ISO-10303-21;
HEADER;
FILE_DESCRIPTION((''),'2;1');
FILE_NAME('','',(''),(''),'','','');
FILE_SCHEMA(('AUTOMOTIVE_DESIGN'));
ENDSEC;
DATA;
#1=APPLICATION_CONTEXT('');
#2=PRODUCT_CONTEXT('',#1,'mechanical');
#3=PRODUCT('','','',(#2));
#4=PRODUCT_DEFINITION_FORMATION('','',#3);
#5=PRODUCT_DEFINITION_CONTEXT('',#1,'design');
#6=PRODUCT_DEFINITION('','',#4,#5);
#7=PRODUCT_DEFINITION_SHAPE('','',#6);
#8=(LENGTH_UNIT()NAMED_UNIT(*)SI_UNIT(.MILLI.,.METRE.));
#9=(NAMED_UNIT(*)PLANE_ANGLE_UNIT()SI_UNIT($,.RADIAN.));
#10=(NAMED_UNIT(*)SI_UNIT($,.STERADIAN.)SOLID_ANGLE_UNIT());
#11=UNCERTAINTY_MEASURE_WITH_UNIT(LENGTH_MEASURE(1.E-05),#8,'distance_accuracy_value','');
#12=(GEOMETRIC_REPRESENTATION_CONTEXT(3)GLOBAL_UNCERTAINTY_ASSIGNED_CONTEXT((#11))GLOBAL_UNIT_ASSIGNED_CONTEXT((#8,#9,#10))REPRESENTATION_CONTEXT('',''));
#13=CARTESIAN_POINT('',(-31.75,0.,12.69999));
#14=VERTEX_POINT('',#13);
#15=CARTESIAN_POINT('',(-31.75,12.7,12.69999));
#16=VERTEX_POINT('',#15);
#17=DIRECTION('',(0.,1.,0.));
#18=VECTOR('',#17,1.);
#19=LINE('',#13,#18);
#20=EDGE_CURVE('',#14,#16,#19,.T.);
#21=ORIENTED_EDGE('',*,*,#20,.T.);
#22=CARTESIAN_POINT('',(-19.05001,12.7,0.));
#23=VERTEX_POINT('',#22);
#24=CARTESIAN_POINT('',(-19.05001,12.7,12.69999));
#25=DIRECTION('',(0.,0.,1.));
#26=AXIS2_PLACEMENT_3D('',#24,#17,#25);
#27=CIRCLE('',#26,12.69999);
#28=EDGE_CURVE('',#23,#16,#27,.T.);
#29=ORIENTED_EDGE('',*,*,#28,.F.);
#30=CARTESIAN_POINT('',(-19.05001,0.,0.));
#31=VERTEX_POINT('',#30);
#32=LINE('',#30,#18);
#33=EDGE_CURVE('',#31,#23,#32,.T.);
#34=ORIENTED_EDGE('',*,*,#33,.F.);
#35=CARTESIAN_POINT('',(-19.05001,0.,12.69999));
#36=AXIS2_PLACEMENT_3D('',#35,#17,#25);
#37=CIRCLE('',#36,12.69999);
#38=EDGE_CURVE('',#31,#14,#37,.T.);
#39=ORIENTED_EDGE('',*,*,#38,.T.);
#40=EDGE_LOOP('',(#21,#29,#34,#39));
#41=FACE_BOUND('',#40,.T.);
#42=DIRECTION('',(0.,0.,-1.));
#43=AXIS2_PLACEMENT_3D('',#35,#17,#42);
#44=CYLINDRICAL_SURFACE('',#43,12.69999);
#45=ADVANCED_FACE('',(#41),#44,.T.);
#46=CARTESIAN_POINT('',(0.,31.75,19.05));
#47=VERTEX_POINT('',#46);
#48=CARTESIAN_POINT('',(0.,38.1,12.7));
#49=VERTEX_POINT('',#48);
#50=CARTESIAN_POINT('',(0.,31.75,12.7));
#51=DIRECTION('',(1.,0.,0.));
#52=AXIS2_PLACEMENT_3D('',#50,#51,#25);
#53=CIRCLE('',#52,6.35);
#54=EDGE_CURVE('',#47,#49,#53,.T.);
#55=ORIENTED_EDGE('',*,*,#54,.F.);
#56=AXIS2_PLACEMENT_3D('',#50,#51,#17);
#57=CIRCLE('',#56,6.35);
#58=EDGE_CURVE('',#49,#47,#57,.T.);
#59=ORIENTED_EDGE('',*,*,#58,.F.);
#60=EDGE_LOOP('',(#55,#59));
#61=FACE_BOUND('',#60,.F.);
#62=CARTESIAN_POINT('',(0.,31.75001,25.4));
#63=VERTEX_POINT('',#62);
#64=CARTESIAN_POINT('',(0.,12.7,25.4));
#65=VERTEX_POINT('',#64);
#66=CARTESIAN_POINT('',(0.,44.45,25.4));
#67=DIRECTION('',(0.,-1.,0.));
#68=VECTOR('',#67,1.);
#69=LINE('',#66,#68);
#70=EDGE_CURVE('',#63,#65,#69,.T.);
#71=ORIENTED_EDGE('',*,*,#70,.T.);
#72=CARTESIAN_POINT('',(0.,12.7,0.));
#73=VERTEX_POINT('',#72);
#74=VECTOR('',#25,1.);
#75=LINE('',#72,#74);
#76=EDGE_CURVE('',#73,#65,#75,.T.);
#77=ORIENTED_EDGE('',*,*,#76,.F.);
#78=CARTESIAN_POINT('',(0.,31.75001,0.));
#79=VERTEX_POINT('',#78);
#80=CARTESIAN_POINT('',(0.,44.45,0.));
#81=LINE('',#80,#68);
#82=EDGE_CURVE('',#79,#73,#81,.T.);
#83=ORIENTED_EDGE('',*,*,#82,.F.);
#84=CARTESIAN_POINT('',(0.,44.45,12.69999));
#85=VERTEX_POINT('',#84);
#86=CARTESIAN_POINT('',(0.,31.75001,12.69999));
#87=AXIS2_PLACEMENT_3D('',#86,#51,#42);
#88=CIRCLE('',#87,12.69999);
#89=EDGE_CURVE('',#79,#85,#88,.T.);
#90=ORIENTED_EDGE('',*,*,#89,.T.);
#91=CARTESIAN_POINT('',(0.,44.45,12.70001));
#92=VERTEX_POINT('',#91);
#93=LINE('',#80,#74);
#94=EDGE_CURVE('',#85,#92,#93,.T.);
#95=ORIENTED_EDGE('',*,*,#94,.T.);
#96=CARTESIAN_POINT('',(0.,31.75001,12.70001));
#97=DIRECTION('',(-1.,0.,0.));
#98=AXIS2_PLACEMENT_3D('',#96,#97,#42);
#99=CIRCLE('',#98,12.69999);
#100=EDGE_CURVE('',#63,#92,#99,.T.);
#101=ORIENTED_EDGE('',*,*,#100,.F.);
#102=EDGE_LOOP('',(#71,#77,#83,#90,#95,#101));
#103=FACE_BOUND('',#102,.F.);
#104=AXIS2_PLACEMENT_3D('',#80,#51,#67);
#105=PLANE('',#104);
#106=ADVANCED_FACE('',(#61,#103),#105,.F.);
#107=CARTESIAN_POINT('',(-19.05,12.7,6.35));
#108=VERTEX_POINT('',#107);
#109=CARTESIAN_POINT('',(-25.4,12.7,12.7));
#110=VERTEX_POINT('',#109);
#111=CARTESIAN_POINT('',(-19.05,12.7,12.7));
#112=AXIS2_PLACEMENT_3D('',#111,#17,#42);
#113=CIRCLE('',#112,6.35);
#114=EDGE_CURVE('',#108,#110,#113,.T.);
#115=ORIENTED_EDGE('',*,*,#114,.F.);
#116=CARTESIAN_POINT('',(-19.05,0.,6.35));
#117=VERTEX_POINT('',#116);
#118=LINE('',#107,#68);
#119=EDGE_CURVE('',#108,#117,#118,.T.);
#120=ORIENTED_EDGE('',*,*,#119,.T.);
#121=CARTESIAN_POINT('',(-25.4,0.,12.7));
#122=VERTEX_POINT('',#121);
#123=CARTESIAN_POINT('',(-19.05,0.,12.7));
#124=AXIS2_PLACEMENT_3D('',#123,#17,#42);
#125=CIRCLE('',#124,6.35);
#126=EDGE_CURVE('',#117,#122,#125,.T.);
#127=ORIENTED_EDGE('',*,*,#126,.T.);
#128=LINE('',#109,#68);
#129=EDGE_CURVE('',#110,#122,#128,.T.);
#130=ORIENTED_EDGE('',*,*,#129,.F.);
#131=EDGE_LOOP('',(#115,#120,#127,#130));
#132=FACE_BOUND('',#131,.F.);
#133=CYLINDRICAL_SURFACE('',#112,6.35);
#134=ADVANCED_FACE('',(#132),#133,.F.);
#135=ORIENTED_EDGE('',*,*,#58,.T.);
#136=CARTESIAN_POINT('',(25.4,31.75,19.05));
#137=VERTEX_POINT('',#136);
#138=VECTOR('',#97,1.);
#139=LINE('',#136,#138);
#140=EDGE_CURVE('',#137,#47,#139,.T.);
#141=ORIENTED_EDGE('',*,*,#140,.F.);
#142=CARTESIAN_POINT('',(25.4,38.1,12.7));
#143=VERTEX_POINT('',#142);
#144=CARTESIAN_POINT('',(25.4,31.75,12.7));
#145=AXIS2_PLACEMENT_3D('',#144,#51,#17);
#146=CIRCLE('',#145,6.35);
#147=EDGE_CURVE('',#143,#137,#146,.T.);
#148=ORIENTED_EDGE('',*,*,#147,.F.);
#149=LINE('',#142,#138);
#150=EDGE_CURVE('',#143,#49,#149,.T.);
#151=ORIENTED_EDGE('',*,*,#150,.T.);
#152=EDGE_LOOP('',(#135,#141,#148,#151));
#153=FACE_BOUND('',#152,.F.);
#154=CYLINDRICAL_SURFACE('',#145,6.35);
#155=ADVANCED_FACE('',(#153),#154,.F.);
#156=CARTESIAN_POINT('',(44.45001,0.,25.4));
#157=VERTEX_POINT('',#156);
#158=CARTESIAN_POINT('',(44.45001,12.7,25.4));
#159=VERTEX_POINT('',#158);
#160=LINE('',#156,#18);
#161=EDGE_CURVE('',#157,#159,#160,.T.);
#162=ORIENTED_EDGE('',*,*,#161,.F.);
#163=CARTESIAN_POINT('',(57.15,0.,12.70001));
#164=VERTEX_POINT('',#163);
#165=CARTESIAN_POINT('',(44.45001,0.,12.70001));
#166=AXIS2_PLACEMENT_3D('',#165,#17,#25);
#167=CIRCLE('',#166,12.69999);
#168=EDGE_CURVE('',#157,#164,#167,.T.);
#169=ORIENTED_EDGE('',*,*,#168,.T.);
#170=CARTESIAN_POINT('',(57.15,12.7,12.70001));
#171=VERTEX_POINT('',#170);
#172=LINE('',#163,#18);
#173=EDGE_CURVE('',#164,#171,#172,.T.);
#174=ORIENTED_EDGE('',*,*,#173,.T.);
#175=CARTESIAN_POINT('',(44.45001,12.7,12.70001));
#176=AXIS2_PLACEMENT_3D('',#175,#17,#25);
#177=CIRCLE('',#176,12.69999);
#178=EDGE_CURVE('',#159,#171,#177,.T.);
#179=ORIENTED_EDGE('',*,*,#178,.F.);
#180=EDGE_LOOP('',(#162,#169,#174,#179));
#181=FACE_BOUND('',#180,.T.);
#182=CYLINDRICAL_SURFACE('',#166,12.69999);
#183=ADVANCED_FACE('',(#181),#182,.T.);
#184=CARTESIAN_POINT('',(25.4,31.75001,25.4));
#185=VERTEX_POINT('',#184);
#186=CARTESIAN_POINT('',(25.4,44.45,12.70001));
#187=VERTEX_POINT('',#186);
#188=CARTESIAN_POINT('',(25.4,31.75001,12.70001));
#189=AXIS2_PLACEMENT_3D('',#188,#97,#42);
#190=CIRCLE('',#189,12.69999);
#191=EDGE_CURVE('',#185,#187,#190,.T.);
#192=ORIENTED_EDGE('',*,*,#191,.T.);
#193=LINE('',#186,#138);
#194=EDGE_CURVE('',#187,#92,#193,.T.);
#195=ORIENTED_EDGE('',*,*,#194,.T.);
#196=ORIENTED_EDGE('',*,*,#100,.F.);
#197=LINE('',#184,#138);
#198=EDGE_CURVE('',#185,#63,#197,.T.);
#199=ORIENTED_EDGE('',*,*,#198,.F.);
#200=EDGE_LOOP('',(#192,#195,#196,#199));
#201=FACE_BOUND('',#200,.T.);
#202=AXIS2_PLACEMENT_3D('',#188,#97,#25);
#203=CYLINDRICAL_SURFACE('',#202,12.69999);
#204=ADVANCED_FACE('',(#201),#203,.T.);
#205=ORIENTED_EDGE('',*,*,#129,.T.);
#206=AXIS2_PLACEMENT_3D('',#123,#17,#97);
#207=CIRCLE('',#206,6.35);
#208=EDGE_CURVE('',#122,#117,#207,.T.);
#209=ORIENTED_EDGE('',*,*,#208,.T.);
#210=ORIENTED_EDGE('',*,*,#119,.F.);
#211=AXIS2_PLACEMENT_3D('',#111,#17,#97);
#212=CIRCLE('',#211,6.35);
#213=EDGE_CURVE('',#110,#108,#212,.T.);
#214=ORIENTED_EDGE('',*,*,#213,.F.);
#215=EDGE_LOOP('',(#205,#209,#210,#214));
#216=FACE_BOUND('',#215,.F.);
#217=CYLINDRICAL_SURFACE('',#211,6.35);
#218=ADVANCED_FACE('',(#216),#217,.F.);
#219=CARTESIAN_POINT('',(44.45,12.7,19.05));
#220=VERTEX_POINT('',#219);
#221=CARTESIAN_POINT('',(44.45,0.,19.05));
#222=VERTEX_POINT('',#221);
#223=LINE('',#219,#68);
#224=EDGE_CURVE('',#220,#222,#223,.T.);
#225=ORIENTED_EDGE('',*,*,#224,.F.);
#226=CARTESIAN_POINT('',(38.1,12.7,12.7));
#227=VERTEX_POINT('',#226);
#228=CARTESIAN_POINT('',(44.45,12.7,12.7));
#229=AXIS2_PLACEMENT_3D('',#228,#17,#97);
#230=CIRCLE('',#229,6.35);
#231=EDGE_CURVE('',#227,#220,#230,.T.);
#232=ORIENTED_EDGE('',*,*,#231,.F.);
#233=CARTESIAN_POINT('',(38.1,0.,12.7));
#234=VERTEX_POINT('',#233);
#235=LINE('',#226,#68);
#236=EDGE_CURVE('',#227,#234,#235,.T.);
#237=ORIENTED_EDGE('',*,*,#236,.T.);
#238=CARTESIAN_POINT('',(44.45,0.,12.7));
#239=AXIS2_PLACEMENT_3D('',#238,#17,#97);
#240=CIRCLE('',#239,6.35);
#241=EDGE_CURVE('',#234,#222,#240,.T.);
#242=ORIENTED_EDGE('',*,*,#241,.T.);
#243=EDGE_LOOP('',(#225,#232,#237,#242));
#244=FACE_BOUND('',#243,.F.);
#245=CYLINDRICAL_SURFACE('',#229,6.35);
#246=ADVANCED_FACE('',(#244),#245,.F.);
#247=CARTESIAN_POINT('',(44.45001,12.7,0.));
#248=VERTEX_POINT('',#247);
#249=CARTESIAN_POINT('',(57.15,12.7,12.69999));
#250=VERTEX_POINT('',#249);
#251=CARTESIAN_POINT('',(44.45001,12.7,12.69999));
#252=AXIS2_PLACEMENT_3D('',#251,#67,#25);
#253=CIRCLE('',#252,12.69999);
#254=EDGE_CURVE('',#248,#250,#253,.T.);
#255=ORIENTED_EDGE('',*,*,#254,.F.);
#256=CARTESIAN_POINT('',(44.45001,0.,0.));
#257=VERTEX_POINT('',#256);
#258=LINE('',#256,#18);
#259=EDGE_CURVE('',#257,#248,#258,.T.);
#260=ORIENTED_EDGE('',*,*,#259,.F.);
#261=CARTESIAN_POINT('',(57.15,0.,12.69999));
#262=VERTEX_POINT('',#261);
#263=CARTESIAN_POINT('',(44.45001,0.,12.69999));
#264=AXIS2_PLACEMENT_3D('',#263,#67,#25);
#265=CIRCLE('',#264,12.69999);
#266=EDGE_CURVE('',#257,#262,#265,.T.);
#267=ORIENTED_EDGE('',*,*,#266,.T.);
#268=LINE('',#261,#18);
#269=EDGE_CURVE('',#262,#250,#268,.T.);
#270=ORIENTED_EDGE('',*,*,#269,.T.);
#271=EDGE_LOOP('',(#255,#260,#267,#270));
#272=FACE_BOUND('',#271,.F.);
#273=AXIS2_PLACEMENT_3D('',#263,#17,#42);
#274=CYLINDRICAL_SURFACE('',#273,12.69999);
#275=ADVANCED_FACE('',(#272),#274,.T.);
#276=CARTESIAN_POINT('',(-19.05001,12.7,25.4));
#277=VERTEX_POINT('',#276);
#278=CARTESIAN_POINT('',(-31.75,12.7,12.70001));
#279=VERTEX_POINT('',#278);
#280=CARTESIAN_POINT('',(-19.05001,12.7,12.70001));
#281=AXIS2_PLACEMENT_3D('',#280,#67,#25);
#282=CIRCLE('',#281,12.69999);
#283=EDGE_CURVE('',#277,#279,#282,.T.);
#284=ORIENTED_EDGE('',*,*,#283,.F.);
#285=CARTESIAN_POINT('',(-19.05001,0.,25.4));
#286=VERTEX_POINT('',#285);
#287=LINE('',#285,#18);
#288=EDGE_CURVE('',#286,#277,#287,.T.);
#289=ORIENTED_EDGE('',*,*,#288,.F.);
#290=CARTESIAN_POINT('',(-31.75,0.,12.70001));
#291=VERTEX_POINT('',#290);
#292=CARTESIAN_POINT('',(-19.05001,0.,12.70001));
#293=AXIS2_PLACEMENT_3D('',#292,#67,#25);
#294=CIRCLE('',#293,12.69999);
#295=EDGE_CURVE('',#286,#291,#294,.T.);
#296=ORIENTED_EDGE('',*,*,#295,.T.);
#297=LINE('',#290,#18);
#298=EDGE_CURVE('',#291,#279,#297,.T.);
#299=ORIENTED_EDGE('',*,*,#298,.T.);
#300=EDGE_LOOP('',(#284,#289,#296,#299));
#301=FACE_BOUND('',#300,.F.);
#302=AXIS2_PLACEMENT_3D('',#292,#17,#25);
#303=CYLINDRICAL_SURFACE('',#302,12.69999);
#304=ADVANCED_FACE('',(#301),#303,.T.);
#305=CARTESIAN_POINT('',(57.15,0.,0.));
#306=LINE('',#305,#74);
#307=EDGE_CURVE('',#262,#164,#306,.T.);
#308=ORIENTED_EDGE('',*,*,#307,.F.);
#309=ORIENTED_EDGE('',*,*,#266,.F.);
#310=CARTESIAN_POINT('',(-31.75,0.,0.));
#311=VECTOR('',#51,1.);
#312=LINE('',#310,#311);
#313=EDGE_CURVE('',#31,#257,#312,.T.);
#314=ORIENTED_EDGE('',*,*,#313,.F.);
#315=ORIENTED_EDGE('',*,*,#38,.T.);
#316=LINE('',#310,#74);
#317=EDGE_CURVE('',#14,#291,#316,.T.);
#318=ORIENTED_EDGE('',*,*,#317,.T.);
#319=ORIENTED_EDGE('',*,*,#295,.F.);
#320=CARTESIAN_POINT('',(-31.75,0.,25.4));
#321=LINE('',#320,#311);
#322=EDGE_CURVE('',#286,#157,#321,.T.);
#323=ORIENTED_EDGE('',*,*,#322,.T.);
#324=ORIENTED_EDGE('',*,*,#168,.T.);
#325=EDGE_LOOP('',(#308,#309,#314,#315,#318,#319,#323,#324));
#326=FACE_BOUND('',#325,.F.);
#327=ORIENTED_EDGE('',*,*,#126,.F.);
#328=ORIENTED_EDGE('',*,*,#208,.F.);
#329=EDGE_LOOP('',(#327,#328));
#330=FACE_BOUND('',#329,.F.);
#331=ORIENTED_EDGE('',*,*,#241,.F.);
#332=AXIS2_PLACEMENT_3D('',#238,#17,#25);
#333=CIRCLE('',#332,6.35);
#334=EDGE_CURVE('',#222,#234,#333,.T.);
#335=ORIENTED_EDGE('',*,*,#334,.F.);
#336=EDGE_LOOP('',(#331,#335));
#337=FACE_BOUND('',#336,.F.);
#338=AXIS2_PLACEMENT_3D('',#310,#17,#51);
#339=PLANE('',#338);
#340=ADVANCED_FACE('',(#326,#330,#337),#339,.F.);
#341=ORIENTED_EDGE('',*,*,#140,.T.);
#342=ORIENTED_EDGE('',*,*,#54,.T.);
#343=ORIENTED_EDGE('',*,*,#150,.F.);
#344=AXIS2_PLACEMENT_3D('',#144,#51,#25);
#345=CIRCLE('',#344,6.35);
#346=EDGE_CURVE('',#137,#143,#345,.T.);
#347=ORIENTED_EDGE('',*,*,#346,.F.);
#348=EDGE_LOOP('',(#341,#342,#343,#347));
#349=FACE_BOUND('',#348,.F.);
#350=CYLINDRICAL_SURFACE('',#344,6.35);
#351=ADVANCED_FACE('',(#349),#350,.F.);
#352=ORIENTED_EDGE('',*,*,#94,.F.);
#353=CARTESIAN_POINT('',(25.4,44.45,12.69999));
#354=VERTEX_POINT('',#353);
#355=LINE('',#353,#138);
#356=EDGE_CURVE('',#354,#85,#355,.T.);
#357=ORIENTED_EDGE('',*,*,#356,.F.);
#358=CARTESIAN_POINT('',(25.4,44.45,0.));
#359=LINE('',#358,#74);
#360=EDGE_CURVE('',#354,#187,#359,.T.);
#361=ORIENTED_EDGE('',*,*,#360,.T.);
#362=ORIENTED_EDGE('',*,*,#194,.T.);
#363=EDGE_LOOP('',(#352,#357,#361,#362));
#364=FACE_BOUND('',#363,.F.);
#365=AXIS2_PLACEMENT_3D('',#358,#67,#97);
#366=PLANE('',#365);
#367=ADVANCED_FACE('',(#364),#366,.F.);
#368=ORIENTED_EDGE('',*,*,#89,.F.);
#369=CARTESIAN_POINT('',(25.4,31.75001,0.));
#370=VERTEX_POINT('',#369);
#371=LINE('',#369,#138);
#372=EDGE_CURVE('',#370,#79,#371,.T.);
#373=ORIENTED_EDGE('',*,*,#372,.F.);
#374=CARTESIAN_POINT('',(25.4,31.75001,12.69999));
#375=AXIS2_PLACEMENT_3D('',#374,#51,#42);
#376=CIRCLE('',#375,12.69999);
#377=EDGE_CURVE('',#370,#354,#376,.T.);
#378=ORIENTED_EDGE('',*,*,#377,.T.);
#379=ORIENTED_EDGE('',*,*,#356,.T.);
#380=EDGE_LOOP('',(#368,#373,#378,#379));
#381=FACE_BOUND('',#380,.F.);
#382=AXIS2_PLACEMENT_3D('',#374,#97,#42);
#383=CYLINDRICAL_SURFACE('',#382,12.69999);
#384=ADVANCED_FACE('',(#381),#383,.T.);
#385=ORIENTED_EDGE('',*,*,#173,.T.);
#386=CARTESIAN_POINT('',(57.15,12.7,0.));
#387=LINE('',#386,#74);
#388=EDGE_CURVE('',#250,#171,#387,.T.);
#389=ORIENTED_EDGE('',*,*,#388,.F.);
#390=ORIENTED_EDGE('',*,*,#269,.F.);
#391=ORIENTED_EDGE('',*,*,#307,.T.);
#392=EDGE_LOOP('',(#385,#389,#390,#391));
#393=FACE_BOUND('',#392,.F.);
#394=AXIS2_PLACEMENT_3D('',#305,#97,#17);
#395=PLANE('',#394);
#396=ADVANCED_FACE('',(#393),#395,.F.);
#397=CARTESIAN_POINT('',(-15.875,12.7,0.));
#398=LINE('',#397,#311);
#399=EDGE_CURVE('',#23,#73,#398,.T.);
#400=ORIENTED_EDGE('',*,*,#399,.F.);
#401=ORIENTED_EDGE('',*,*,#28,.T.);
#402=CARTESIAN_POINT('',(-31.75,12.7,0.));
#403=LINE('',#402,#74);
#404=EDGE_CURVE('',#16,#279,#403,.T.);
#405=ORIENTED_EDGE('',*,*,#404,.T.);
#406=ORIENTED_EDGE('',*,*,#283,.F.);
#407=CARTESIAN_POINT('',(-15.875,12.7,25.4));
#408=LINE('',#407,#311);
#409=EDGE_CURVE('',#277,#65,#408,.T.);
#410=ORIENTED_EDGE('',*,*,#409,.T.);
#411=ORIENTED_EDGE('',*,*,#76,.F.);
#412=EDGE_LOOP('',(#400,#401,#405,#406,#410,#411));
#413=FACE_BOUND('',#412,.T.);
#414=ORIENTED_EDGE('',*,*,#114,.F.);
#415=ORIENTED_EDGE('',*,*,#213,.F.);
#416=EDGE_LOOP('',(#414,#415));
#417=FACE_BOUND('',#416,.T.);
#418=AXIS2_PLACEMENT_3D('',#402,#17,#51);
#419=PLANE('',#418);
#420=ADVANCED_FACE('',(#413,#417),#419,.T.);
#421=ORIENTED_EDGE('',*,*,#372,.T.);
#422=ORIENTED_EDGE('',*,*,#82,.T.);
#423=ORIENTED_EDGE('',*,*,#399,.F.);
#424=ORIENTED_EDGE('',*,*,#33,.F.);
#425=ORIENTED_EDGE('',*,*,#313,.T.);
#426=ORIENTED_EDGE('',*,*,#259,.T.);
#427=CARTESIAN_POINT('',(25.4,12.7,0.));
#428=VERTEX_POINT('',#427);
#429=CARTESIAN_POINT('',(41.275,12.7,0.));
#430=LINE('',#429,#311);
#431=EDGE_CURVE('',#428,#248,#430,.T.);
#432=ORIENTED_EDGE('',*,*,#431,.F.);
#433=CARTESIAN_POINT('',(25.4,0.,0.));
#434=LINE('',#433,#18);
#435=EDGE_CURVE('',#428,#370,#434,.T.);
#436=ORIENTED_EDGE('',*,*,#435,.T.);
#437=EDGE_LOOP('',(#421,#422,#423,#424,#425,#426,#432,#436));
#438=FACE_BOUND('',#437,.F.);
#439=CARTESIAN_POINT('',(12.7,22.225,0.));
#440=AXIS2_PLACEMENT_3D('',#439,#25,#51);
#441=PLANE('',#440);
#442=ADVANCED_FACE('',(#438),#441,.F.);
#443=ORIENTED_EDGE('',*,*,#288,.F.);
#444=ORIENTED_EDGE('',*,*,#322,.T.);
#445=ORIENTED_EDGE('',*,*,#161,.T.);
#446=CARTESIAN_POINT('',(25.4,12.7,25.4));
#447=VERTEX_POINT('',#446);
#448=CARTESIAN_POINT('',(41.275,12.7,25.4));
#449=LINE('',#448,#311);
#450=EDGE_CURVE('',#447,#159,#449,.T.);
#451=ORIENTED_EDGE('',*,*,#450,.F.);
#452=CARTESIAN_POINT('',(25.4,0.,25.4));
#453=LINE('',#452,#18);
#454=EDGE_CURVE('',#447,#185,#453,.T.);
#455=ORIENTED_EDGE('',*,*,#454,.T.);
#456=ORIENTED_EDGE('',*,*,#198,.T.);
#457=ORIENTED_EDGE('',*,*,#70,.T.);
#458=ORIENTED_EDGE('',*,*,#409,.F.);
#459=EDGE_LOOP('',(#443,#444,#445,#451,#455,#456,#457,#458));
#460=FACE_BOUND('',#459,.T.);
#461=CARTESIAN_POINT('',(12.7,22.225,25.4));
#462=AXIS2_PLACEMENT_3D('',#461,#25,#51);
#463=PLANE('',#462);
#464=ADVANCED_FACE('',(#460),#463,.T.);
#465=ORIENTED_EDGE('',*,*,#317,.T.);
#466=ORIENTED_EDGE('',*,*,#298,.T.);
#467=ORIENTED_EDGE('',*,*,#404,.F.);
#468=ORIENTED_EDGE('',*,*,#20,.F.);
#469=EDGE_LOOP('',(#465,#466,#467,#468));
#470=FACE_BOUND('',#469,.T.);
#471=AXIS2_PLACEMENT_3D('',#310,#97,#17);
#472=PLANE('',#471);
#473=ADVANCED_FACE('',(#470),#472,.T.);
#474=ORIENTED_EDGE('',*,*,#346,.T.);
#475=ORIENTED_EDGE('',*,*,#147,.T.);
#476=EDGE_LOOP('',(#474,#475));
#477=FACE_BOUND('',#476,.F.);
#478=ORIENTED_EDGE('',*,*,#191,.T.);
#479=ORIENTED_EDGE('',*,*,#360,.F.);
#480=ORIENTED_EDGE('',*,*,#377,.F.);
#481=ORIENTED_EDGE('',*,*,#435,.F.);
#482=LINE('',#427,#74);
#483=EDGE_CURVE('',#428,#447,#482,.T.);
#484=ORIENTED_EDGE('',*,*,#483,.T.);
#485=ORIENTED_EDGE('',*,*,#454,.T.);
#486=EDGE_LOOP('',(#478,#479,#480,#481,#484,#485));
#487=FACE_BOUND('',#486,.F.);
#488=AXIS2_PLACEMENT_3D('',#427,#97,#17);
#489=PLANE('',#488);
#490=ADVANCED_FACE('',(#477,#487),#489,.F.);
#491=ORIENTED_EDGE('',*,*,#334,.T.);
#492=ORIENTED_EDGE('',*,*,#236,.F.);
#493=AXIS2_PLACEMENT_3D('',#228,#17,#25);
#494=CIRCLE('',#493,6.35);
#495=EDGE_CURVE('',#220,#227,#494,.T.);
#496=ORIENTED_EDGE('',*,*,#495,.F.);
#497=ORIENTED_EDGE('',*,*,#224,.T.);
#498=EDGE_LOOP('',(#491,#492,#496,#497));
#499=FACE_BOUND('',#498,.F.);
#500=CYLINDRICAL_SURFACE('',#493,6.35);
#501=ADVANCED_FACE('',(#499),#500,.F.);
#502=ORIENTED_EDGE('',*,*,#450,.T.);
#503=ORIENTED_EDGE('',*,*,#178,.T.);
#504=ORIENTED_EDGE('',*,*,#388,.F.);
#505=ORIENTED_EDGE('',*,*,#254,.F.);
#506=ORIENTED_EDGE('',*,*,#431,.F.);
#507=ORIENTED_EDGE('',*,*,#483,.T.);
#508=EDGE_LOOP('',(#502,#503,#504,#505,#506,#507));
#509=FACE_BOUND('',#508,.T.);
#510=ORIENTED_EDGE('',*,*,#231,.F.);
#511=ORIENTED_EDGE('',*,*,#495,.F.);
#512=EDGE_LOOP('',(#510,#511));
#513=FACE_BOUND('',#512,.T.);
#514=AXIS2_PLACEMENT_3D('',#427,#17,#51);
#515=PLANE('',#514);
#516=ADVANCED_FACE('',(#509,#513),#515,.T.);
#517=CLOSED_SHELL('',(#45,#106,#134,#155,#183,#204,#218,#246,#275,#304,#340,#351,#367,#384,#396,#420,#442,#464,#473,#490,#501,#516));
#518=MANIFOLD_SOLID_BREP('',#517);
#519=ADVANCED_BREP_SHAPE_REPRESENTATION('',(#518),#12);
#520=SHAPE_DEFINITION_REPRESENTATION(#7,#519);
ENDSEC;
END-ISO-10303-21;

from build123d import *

# Parameters (mm, degrees)
F0_W     = 31.75
F0_H     = 12.7
F1_DEPTH = 25.4
F3_DEPTH = 25.4
F5_DEPTH = 25.4
F7_DEPTH = 25.4
F8_R     = 12.69999


# Not quite as in the source:
# - a fillet or chamfer is up to 0.001 mm smaller than in the source, because OpenCascade refuses the exact size


with BuildPart() as f1:
    # F0 (on Top) → F1 (new body)
    with BuildSketch(Plane.XY):
        Polygon((0, 12.7), (0, 0), (25.4, 0), (25.4, 12.7), (25.4, 44.45), (0, 44.45), align=None)
        with Locations((-15.875, 6.35)):
            Rectangle(F0_W, F0_H)
        with Locations((41.275, 6.35)):
            Rectangle(F0_W, F0_H)
    extrude(amount=F1_DEPTH)

    # F2 (on face) → F3 (cut)
    with BuildSketch(Plane.YZ.offset(25.4)):
        with BuildLine():
            ThreePointArc((38.1, 12.7), (36.2401280605, 17.1901280605), (31.75, 19.05))
            ThreePointArc((31.75, 19.05), (27.2598719395, 8.2098719395), (38.1, 12.7))
        make_face()
    extrude(amount=-F3_DEPTH, mode=Mode.SUBTRACT)

    # F4 (on face) → F5 (cut)
    with BuildSketch(Plane(origin=(0, 12.7, 0), x_dir=(-1, 0, 0), z_dir=(0, 1, 0))):
        with BuildLine():
            ThreePointArc((-44.45, 19.05), (-48.9401280605, 8.2098719395), (-38.1, 12.7))
            ThreePointArc((-38.1, 12.7), (-39.9598719395, 17.1901280605), (-44.45, 19.05))
        make_face()
    extrude(amount=-F5_DEPTH, mode=Mode.SUBTRACT)

    # F6 (on face) → F7 (cut)
    with BuildSketch(Plane(origin=(0, 12.7, 0), x_dir=(-1, 0, 0), z_dir=(0, 1, 0))):
        with BuildLine():
            ThreePointArc((19.05, 6.35), (23.5401280605, 8.2098719395), (25.4, 12.7))
            ThreePointArc((25.4, 12.7), (14.5598719395, 17.1901280605), (19.05, 6.35))
        make_face()
    extrude(amount=-F7_DEPTH, mode=Mode.SUBTRACT)

    # F8 (radius 12.7 in the source; OpenCascade refuses exactly that, so slightly less here)
    f8_edges = [f1.edges().sort_by_distance(p)[0] for p in [
        (57.15, 6.35, 25.4),
        (57.15, 6.35, 0),
        (12.7, 44.45, 25.4),
        (12.7, 44.45, 0),
        (-31.75, 6.35, 0),
        (-31.75, 6.35, 25.4),
    ]]
    fillet(f8_edges, radius=F8_R)


solid = f1.part
